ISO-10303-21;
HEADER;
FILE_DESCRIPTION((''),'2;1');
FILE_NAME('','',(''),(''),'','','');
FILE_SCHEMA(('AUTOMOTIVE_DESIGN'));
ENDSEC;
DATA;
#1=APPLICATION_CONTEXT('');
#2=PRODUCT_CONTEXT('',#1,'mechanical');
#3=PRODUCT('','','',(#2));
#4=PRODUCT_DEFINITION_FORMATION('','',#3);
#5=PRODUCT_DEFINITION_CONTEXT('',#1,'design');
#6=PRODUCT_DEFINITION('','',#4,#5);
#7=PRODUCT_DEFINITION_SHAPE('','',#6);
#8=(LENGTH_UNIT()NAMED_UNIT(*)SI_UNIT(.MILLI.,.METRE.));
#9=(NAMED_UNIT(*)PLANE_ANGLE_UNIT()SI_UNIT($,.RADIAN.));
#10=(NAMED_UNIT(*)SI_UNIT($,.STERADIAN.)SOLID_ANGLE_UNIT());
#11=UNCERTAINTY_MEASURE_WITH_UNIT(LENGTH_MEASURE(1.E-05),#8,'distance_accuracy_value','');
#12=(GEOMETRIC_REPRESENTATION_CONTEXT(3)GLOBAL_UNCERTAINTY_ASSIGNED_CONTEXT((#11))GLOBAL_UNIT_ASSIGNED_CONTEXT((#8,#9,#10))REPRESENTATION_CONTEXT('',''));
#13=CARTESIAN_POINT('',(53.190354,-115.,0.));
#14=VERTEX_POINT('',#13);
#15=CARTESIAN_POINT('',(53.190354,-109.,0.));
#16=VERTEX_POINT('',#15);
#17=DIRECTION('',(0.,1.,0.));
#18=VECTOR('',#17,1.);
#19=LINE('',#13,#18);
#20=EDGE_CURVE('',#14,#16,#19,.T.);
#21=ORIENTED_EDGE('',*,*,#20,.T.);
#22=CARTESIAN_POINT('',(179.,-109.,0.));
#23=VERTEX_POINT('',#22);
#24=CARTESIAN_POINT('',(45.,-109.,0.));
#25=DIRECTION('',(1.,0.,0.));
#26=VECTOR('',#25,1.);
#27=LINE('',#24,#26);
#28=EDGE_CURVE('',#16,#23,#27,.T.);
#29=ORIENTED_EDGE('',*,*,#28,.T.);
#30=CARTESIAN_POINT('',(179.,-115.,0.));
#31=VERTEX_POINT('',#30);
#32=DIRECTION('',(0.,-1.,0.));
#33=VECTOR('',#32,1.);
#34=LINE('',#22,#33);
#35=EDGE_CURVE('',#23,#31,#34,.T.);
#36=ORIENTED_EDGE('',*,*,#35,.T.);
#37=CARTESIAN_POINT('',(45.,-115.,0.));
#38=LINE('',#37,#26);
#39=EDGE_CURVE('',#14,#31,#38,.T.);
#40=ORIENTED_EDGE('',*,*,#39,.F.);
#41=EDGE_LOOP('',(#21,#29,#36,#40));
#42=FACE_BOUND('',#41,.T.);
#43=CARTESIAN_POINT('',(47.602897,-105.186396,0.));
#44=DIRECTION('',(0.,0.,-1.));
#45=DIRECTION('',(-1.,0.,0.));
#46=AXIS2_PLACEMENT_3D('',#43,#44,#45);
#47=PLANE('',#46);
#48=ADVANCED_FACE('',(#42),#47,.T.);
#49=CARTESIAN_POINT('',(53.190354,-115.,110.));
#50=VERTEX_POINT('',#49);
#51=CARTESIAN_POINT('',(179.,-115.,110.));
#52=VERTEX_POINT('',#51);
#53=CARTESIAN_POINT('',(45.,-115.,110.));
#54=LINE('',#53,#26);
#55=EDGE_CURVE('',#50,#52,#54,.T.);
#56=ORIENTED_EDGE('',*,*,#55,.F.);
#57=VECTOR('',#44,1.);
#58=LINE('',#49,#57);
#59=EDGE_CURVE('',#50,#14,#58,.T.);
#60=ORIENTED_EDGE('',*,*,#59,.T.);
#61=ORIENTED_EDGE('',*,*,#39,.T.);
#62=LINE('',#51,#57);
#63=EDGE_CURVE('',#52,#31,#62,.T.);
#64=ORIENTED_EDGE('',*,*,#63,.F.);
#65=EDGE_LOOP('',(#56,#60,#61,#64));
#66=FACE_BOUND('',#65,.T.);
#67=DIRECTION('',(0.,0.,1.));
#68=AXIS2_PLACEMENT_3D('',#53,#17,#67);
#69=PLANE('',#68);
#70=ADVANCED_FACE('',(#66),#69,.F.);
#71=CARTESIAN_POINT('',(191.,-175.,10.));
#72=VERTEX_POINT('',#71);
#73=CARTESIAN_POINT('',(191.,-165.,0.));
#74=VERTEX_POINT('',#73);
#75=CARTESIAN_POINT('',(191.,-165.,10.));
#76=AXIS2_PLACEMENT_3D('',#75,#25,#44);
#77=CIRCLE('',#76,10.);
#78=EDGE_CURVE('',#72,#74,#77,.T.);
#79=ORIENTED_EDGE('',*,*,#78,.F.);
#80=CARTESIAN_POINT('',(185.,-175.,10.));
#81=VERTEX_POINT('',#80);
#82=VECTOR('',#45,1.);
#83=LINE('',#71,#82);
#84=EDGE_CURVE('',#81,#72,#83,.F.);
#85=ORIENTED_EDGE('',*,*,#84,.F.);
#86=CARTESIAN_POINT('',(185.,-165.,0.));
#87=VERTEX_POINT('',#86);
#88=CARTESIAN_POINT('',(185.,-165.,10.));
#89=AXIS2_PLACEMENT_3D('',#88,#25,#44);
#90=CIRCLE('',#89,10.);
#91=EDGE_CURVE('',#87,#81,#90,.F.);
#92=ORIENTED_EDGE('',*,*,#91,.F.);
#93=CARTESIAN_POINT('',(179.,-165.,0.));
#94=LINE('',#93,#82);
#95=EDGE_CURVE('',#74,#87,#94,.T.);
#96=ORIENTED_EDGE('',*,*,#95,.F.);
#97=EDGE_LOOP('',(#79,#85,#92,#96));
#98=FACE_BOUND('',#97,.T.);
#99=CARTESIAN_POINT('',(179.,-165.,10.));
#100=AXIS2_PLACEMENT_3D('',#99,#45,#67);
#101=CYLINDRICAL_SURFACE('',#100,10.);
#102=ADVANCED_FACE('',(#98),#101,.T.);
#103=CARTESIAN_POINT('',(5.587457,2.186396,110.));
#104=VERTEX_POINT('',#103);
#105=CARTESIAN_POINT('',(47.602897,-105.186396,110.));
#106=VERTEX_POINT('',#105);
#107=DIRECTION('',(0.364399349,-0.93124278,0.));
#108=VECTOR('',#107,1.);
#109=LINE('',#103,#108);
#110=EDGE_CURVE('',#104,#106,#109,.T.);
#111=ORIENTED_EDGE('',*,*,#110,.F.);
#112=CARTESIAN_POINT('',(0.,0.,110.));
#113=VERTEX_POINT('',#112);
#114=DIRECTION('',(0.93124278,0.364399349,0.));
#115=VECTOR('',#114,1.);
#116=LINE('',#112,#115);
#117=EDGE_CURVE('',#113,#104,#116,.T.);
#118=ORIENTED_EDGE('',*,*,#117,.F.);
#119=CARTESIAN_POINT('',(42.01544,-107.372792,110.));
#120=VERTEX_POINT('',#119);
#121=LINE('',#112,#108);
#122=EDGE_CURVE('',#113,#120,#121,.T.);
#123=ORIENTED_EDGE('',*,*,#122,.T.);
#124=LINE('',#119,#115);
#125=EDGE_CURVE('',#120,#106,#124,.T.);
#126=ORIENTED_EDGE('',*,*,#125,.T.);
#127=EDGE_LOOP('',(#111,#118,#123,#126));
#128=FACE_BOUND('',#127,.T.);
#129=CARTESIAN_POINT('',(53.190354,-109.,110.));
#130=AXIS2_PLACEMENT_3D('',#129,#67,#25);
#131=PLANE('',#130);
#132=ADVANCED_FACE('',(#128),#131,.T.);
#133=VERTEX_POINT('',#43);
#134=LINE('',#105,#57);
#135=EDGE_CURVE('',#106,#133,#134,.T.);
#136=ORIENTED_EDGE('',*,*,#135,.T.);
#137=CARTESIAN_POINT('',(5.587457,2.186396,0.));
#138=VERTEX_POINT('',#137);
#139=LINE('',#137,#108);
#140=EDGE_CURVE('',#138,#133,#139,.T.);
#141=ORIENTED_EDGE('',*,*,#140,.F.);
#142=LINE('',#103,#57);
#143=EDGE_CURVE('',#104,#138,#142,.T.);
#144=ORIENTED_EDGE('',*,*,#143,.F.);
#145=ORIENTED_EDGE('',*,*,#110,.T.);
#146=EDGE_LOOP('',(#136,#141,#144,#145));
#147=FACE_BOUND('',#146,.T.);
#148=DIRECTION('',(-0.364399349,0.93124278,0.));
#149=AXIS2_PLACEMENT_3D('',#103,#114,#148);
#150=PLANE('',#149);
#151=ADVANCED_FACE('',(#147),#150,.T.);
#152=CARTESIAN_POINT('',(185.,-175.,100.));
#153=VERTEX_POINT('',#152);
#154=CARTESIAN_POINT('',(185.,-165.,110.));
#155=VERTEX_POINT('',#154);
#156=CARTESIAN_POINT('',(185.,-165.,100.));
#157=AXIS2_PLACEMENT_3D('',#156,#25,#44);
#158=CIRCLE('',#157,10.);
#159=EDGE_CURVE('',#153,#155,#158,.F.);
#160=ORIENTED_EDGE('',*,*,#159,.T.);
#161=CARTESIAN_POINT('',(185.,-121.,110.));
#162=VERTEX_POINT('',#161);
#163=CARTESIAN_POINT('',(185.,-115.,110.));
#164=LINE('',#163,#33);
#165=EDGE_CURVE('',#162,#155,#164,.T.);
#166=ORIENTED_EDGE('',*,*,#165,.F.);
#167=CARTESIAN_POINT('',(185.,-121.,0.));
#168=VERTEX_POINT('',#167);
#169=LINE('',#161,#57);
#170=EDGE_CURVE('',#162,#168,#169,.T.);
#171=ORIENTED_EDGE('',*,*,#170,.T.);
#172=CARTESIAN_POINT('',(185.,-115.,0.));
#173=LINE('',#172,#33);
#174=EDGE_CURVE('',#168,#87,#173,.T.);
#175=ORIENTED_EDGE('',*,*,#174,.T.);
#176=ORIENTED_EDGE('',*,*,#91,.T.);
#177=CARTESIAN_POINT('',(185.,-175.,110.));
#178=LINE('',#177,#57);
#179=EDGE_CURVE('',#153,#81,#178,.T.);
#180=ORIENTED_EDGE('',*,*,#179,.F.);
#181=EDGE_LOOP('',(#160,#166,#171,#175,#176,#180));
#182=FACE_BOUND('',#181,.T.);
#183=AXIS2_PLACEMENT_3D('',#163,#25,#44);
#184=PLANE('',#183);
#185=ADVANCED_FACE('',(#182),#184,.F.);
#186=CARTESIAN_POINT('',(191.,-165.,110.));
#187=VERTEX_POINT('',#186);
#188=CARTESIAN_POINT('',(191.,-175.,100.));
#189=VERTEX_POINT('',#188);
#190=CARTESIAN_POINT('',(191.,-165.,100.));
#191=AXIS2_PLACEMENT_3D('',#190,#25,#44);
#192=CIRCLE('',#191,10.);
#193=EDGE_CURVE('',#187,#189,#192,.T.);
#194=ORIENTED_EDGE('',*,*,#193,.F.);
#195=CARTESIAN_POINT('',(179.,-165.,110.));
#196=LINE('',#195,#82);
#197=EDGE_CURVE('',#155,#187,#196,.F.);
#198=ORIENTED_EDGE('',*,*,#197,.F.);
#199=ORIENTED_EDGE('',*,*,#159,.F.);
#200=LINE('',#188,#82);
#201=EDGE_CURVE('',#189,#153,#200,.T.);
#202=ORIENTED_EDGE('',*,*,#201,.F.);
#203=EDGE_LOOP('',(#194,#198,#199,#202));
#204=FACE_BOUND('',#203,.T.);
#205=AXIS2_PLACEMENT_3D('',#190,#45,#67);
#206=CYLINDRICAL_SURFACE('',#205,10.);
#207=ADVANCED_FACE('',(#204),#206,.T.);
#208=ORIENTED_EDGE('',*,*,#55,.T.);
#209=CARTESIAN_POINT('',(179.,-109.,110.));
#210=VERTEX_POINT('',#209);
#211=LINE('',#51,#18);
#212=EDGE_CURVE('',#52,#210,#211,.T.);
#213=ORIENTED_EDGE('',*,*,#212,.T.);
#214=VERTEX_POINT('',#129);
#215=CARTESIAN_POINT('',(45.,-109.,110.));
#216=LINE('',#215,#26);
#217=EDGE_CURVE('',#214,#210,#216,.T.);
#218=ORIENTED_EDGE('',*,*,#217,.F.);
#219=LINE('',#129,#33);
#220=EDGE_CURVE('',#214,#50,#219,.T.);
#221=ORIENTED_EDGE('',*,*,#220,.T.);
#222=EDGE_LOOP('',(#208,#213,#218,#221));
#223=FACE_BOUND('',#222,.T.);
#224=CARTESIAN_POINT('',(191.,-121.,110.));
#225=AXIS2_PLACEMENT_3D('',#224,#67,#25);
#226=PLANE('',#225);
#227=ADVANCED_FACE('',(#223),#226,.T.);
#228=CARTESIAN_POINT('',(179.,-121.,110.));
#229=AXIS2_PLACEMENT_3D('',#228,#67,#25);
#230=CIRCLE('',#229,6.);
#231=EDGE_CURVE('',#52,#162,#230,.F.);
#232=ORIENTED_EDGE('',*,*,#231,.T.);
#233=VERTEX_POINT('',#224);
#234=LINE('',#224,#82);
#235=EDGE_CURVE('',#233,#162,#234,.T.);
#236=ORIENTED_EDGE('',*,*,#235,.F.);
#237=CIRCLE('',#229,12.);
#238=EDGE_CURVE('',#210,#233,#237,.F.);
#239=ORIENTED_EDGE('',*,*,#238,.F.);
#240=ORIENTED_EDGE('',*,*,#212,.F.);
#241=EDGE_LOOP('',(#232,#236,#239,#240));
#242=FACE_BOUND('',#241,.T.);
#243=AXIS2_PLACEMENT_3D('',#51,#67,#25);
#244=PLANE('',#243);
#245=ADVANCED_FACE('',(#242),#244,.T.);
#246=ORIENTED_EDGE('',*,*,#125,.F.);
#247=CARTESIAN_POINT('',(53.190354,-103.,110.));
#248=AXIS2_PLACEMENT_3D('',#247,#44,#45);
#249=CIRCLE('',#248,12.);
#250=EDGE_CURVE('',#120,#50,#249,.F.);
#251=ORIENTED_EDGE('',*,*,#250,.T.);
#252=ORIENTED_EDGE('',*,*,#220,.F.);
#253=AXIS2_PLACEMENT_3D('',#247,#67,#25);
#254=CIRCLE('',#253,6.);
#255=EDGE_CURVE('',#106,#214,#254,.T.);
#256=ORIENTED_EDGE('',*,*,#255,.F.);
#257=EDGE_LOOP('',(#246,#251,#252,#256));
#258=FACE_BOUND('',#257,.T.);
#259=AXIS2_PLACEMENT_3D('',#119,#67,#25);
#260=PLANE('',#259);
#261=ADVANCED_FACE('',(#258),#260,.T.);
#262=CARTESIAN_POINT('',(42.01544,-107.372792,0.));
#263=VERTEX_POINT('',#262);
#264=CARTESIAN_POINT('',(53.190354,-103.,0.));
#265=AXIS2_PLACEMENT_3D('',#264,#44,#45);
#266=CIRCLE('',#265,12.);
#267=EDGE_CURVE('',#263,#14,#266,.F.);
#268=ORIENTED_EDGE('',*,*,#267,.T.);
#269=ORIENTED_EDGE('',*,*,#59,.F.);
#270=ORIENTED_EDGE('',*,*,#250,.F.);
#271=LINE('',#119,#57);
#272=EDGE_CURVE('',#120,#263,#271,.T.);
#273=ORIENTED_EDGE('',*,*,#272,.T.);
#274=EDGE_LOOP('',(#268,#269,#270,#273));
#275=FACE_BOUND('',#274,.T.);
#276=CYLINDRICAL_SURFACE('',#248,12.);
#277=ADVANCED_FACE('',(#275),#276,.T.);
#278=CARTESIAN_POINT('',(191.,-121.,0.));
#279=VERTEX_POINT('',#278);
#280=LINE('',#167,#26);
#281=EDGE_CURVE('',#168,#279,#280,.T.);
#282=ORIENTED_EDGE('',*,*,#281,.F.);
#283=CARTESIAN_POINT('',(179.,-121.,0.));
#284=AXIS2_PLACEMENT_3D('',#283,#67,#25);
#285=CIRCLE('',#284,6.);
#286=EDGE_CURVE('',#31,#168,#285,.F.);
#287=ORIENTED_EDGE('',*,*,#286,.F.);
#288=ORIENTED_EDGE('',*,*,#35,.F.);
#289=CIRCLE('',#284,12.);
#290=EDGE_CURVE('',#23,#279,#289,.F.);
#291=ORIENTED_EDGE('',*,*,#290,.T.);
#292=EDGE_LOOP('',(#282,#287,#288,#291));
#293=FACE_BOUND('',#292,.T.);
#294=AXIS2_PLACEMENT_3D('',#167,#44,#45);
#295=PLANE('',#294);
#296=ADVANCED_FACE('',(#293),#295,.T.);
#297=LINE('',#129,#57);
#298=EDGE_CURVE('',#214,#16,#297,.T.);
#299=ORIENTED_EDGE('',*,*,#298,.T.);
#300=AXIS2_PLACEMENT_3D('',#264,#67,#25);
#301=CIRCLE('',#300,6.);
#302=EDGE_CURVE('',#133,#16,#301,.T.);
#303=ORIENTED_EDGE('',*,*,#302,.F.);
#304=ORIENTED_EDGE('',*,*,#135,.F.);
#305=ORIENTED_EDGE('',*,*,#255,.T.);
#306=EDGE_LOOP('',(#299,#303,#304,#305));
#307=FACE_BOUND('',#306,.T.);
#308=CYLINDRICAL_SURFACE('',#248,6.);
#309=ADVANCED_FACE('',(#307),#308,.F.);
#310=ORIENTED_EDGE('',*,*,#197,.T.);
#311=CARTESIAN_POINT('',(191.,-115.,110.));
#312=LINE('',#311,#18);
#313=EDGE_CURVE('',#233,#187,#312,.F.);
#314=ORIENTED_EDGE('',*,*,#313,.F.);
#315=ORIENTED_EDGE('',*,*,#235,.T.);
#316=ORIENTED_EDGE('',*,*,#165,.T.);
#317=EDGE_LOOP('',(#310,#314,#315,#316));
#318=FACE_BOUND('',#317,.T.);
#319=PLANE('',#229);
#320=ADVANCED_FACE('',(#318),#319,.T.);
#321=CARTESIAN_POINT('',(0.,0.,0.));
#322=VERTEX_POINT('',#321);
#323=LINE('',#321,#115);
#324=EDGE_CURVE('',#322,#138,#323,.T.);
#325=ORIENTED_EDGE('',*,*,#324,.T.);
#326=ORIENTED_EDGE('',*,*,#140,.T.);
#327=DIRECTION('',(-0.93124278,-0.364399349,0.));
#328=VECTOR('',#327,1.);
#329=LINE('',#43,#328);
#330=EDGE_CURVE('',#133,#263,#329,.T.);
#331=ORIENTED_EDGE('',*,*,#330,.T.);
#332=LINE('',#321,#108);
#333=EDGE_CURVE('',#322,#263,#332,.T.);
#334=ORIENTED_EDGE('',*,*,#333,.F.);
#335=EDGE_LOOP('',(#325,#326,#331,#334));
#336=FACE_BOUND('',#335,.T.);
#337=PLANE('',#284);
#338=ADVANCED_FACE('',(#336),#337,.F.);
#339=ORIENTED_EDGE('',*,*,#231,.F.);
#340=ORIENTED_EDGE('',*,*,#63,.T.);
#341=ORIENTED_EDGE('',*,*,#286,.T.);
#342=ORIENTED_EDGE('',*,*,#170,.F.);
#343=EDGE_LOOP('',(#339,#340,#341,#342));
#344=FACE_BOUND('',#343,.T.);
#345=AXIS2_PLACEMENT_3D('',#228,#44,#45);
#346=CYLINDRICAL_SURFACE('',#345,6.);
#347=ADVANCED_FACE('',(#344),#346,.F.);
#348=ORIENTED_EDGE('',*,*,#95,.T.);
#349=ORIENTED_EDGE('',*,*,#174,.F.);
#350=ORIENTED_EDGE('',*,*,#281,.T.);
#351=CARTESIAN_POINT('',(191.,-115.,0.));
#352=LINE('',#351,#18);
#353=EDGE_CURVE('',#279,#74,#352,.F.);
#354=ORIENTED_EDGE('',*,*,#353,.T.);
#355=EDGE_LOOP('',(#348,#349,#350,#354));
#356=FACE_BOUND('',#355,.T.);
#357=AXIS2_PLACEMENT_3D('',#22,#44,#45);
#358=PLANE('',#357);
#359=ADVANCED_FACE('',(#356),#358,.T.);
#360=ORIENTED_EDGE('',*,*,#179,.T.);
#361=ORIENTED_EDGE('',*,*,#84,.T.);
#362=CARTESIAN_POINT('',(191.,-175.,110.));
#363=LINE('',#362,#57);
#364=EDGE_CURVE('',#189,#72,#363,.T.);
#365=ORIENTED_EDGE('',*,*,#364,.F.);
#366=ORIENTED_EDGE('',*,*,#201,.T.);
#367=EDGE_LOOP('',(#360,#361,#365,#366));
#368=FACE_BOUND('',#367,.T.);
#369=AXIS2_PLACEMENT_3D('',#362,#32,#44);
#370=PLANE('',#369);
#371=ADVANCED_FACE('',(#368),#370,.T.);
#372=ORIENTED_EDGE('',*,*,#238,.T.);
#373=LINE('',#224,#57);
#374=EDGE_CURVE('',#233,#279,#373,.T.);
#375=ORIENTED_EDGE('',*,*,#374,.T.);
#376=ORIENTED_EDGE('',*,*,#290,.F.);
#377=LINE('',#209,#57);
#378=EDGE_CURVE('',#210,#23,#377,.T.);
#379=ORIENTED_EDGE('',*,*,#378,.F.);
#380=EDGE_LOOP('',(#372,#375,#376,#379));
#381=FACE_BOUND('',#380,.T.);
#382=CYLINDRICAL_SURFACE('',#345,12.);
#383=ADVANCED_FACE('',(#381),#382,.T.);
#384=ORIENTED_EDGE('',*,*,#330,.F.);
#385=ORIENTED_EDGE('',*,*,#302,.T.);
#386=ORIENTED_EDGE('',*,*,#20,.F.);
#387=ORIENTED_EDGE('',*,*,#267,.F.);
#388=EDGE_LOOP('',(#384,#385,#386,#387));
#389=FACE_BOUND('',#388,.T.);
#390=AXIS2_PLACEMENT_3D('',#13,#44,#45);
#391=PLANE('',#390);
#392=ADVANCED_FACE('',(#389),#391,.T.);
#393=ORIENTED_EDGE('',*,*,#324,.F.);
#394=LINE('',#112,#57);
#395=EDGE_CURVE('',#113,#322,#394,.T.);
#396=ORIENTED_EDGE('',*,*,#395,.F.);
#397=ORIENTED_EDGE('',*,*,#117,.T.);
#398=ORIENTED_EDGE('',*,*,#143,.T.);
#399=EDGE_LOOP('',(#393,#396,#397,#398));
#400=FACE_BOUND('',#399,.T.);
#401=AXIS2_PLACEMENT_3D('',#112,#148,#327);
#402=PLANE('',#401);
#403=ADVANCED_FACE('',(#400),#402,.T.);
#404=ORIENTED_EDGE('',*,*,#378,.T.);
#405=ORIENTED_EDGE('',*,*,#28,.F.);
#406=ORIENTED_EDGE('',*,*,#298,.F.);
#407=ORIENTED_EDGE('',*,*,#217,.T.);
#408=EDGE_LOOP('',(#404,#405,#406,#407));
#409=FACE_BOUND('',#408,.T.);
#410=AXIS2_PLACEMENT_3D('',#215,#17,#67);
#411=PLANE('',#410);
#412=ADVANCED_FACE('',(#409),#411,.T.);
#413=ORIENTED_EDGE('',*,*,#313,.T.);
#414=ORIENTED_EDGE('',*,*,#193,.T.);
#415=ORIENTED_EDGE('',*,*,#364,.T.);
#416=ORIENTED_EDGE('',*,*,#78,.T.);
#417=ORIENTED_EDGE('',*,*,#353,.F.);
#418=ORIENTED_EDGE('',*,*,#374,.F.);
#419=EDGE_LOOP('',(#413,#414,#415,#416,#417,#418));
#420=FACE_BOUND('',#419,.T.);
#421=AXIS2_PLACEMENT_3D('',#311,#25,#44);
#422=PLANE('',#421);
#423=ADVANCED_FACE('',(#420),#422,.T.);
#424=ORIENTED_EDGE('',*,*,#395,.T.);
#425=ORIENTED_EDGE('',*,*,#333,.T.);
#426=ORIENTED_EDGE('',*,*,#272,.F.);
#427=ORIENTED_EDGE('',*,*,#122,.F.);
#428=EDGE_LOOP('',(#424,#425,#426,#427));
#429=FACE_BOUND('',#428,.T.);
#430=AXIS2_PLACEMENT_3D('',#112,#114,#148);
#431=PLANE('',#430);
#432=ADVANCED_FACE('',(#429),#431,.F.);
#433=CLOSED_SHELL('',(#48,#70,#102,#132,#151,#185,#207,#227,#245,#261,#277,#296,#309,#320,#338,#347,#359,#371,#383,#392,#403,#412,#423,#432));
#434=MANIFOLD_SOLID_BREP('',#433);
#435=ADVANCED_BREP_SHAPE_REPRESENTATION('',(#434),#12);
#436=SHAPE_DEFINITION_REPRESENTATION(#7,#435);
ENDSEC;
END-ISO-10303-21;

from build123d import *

# Parameters (mm, degrees)
SM_BASE_FLANGE_1_DEPTH = 110
FILLET_1_R             = 10


# Sheet-metal steps are written as plain solids
with BuildPart() as part:
    # Sketch 1 → 基体-法兰1 (new body)
    with BuildSketch(Plane.XY):
        with BuildLine():
            Line((0, 0), (42.015440419, -107.372792183))
            ThreePointArc((42.015440419, -107.372792183), (46.425499978, -112.91144556), (53.190353776, -115))
            Line((53.190353776, -115), (179, -115))
            ThreePointArc((179, -115), (183.242640687, -116.757359313), (185, -121))
            Line((185, -121), (185, -175))
            Line((185, -175), (191, -175))
            Line((191, -175), (191, -121))
            ThreePointArc((191, -121), (187.485281374, -112.514718626), (179, -109))
            Line((179, -109), (53.190353776, -109))
            ThreePointArc((53.190353776, -109), (49.807926877, -107.95572278), (47.602897098, -105.186396091))
            Line((47.602897098, -105.186396091), (5.587456678, 2.186396091))
            Line((5.587456678, 2.186396091), (0, 0))
        make_face()
    extrude(amount=SM_BASE_FLANGE_1_DEPTH)

    # 圆角1
    fillet_1_edges = [part.edges().sort_by_distance(p)[0] for p in [
        (188, -175, 0),
        (188, -175, 110),
    ]]
    fillet(fillet_1_edges, radius=FILLET_1_R)


solid = part.part
